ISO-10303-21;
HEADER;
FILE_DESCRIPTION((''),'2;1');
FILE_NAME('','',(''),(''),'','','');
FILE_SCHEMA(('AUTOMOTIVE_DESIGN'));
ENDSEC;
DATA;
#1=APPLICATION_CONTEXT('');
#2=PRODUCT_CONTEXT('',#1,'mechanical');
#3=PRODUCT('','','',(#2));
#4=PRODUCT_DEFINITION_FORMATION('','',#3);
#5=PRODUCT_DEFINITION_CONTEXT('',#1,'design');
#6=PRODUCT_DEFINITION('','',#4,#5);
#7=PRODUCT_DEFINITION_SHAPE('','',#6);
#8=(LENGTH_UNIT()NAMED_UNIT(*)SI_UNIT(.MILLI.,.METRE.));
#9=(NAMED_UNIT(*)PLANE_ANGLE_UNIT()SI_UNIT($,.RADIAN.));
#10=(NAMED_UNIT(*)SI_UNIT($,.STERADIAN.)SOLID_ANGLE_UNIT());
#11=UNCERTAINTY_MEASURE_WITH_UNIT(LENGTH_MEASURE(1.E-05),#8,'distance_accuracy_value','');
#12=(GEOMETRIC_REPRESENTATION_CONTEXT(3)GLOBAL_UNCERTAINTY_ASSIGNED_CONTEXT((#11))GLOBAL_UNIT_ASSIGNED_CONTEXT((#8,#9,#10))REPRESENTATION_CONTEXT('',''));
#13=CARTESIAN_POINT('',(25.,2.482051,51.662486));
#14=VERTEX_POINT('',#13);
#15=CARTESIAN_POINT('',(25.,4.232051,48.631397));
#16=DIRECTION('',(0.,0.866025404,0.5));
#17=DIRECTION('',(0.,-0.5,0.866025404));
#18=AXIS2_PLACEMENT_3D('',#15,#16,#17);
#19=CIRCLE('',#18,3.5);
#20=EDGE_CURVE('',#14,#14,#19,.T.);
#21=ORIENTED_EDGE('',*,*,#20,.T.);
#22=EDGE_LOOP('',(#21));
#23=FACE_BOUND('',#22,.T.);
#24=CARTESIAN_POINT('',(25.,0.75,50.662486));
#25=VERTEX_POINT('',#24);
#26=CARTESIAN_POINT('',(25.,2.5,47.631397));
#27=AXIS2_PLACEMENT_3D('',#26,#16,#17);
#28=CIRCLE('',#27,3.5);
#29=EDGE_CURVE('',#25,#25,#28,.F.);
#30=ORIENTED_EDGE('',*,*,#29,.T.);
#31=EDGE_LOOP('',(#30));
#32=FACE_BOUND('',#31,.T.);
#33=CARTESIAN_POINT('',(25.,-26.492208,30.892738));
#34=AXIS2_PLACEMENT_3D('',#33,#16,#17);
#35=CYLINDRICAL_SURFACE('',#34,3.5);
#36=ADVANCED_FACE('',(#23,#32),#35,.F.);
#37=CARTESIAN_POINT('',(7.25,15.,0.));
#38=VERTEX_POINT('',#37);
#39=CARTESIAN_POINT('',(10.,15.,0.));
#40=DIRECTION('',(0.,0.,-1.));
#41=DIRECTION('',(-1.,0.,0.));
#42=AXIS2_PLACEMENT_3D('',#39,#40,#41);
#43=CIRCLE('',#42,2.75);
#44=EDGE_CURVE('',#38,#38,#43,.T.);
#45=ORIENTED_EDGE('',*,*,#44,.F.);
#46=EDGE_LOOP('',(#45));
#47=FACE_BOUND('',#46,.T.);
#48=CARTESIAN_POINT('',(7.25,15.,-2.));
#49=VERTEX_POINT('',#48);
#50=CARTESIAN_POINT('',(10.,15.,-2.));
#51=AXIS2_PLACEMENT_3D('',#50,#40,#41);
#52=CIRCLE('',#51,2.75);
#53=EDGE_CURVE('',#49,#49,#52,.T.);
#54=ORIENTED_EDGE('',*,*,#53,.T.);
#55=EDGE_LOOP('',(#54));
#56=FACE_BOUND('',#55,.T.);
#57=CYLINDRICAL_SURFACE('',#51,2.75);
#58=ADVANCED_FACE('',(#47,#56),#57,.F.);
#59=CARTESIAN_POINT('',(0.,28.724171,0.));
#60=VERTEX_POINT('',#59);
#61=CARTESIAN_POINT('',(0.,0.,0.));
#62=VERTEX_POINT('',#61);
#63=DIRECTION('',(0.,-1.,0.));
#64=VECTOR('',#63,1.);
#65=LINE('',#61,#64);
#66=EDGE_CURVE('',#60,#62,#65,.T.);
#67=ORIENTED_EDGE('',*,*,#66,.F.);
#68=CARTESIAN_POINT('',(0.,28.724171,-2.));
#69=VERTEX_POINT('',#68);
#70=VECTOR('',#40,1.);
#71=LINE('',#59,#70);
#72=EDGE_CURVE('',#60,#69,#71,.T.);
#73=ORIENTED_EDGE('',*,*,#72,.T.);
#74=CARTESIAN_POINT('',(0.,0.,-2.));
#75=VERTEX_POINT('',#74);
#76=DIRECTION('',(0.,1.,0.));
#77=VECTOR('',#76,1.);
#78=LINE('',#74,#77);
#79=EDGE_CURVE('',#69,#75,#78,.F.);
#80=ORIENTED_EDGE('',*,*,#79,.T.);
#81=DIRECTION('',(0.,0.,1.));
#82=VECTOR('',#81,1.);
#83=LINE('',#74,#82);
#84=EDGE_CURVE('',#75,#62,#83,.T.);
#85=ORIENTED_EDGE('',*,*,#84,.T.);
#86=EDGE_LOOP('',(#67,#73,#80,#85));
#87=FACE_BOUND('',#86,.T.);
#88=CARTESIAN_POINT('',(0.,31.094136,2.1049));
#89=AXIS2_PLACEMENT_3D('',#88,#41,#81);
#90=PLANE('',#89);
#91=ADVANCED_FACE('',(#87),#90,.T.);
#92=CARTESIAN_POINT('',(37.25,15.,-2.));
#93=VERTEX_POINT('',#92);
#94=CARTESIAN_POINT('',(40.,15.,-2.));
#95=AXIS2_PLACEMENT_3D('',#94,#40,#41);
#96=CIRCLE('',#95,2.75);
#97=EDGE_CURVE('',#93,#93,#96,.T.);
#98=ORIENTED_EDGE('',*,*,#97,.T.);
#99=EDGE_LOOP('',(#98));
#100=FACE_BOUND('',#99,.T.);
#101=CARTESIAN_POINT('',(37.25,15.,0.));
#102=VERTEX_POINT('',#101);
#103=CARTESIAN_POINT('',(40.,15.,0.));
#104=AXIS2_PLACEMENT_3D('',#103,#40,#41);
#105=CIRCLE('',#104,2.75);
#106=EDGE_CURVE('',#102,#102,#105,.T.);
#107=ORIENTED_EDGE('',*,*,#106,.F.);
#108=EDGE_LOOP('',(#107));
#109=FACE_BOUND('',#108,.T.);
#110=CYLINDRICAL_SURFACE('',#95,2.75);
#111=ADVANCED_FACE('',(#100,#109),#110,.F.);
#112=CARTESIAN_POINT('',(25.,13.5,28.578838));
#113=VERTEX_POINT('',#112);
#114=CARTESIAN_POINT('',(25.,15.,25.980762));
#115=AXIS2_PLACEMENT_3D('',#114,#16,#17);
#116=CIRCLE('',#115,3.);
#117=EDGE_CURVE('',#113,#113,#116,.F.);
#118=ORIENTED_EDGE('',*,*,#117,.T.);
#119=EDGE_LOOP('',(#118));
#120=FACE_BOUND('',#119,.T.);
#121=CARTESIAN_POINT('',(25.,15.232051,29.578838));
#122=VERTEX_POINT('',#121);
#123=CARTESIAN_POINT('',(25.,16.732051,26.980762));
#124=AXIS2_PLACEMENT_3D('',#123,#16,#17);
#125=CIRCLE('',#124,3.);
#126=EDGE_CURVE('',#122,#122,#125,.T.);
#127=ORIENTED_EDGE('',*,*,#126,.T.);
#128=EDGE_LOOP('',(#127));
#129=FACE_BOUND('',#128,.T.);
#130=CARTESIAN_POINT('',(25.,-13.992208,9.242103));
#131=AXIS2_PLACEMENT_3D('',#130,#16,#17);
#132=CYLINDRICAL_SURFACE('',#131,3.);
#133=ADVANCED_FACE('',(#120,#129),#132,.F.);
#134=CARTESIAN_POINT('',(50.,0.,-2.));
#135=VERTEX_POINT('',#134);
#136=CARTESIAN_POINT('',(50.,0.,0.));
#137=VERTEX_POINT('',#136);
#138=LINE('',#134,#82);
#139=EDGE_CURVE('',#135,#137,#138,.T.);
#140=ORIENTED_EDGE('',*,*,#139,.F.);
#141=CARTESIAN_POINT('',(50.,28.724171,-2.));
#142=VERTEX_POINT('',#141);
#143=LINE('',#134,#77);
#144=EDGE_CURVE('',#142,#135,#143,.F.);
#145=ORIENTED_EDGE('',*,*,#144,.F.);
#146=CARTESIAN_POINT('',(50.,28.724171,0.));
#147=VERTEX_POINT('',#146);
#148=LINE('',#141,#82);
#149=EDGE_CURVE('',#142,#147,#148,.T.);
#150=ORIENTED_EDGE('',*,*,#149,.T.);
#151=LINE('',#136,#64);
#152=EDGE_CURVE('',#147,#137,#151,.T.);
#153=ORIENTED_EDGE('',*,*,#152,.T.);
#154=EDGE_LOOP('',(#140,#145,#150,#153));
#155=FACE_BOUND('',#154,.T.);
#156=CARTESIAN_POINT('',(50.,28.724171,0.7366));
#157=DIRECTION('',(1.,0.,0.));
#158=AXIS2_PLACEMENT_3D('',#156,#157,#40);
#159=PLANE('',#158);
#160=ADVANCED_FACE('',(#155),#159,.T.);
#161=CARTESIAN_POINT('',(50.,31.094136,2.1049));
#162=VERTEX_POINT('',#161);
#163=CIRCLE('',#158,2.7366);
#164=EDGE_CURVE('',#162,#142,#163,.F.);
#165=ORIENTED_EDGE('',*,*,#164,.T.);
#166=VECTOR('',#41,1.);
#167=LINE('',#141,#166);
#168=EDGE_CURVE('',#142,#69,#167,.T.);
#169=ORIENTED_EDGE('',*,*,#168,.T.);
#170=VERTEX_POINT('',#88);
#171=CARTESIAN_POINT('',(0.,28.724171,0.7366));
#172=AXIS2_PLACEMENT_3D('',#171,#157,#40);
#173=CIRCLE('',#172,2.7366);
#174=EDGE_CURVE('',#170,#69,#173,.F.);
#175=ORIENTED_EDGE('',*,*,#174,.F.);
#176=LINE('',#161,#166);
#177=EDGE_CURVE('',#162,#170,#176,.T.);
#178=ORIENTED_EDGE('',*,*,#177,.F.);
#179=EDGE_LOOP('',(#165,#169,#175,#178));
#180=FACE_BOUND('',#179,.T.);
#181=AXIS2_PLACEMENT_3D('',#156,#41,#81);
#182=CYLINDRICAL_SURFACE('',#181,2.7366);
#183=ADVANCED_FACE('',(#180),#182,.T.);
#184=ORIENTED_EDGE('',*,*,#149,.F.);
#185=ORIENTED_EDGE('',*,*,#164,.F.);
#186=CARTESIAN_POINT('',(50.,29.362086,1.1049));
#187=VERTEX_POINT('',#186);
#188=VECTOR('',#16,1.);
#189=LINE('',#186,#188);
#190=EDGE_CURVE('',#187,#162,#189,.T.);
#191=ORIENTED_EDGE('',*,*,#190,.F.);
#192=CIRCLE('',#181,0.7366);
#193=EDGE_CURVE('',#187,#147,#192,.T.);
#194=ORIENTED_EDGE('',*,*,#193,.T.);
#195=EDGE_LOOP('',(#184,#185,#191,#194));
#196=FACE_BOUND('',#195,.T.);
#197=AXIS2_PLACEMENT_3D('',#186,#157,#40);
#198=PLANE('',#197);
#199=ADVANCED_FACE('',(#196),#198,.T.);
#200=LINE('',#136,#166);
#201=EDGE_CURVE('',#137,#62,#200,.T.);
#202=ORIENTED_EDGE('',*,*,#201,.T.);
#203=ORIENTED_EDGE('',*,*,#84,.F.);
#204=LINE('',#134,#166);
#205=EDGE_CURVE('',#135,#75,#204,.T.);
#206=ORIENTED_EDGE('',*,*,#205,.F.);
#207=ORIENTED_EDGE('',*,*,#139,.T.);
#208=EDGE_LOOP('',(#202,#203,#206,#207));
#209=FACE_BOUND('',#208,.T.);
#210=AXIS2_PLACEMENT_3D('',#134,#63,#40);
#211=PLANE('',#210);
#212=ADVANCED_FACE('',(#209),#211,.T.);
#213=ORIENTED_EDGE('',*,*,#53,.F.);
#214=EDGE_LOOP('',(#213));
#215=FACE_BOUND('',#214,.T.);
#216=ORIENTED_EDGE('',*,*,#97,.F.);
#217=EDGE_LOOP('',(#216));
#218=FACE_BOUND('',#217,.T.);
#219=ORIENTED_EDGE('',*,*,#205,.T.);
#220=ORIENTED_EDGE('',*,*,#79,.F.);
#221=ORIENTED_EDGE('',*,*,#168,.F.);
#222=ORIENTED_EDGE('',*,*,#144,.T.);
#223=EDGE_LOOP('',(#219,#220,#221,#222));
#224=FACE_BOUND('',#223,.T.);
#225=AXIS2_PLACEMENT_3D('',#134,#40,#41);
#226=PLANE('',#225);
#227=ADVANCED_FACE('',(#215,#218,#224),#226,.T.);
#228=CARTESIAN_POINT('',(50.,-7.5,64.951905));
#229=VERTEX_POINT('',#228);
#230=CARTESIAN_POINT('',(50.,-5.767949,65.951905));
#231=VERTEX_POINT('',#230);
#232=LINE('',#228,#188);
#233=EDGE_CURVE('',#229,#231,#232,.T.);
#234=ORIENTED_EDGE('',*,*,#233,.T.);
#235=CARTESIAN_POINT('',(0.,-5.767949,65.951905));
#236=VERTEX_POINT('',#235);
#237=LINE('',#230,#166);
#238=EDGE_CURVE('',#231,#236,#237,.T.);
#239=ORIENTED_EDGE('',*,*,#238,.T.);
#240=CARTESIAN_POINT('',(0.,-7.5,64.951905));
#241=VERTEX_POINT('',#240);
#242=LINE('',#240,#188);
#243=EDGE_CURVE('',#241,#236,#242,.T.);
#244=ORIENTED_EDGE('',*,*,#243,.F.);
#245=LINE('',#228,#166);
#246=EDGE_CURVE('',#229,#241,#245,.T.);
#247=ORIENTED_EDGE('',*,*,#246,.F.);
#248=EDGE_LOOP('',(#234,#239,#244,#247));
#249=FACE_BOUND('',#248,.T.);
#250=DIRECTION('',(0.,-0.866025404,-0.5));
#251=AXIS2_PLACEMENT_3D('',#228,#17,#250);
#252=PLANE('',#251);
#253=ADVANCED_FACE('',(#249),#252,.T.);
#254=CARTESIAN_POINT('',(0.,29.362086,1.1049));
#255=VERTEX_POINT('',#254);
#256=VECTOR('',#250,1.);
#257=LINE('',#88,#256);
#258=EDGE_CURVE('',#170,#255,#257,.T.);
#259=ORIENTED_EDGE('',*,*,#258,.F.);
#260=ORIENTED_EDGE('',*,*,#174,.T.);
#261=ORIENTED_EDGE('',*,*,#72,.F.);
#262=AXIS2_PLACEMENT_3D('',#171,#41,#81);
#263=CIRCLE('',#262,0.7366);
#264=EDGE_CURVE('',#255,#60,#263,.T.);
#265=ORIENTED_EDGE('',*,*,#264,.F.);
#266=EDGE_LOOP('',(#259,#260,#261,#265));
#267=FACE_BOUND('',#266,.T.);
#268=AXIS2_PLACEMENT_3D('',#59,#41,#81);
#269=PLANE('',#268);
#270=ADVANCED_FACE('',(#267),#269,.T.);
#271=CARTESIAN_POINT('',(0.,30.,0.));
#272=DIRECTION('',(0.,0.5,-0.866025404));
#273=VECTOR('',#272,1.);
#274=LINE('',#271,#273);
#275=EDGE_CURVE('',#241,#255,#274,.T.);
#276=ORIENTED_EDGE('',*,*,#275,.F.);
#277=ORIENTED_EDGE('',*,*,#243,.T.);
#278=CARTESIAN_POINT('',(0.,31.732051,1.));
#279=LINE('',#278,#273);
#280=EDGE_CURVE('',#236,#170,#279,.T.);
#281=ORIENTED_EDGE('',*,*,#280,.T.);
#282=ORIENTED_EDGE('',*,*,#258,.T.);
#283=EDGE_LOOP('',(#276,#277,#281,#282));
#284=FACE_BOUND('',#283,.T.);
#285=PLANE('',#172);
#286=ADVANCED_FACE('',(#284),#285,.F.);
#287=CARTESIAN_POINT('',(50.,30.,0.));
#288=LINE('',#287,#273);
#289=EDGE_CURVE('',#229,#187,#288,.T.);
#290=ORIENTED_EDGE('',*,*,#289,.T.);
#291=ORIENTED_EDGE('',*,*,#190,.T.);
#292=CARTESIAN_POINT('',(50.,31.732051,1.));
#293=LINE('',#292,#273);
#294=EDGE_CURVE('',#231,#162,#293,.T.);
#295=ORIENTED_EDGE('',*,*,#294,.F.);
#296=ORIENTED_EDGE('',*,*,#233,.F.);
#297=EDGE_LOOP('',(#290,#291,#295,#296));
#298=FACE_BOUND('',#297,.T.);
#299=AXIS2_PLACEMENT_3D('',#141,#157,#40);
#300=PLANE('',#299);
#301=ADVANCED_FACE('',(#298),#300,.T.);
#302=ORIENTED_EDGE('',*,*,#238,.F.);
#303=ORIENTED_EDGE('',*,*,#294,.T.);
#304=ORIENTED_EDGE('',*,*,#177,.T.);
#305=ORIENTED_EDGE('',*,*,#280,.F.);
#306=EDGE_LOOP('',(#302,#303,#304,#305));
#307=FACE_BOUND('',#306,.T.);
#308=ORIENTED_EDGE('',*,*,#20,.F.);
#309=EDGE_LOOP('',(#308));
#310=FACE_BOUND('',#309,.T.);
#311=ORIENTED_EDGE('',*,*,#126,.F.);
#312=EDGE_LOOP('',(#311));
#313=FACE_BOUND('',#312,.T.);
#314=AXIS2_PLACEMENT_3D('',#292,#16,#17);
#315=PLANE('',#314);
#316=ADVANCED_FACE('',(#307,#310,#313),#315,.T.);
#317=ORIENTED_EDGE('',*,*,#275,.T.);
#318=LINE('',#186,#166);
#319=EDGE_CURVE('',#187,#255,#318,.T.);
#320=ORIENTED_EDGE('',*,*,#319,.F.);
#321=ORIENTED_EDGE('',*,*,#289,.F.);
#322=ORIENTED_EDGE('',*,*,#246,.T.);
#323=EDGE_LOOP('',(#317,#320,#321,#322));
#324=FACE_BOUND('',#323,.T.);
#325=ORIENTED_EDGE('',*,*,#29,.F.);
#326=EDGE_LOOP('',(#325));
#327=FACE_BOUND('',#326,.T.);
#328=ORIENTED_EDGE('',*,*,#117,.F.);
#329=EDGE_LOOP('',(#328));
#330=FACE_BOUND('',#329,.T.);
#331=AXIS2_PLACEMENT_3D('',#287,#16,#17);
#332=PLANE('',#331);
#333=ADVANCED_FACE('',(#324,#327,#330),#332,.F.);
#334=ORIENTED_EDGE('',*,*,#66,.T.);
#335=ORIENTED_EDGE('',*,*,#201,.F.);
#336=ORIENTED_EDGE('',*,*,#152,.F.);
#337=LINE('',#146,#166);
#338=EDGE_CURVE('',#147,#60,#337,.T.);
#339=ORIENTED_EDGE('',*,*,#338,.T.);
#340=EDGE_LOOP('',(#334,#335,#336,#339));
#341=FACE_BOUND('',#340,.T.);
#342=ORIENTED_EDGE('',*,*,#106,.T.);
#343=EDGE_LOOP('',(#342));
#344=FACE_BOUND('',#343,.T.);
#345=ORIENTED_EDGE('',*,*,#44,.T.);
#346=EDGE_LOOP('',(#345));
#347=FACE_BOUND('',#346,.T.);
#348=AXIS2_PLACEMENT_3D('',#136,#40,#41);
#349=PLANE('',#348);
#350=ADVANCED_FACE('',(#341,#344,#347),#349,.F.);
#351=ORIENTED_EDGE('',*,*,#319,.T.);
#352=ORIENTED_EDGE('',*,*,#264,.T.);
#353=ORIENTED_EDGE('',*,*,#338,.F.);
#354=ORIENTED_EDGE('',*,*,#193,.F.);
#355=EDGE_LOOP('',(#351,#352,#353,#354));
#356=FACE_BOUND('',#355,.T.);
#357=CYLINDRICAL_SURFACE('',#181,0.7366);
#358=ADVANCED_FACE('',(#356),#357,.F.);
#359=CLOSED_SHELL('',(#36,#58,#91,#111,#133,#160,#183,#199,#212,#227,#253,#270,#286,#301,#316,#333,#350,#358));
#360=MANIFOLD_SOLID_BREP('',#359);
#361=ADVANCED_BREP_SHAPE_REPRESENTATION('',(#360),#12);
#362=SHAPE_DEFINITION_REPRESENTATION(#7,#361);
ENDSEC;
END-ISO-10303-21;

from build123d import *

# Parameters (mm, degrees)
FLANGE_BASE1_DEPTH          = 50
CORTE_EXTRUS_O2_REACH       = 80.784
ESBO_O2_R                   = 3
ESBO_O2_R_2                 = 3.5
FURO_COM_FOLGA_DE_M51_D     = 5.5
FURO_COM_FOLGA_DE_M51_DEPTH = 2


# Sheet-metal steps are written as plain solids
with BuildPart() as part:
    # Esboço1 → Flange-base1 (new body)
    with BuildSketch(Plane(origin=(0, 0, 0), x_dir=(0, 0, -1), z_dir=(1, 0, 0))):
        with BuildLine():
            Line((0, 0), (0, 28.724171375))
            ThreePointArc((0, 28.724171375), (-0.3683, 29.362085688), (-1.1049, 29.362085688))
            Line((-1.1049, 29.362085688), (-64.951905284, -7.5))
            Line((-64.951905284, -7.5), (-65.951905284, -5.767949192))
            Line((-65.951905284, -5.767949192), (-2.1049, 31.094136495))
            ThreePointArc((-2.1049, 31.094136495), (0.6317, 31.094136495), (2, 28.724171375))
            Line((2, 28.724171375), (2, 0))
            Line((2, 0), (0, 0))
        make_face()
    extrude(amount=FLANGE_BASE1_DEPTH)

    # Esboço2 → Corte-extrusão2 (cut, up to next)
    with BuildSketch(Plane(origin=(0, 24.232050808, 13.990381057), x_dir=(1, 0, 0), z_dir=(0, 0.866025403784436, 0.5000000000000044)), mode=Mode.PRIVATE) as corte_extrus_o2_sk1:
        with Locations(Location((25, -15, 0), (0, 0, 270))):
            Circle(ESBO_O2_R)
    corte_extrus_o2_tool1 = extrude(corte_extrus_o2_sk1.sketch, amount=-CORTE_EXTRUS_O2_REACH, mode=Mode.PRIVATE) & part.part
    # Esboço2 → Corte-extrusão2 (cut, up to next)
    with BuildSketch(Plane(origin=(0, 24.232050808, 13.990381057), x_dir=(1, 0, 0), z_dir=(0, 0.866025403784436, 0.5000000000000044)), mode=Mode.PRIVATE) as corte_extrus_o2_sk2:
        with Locations(Location((25, -40, 0), (0, 0, 270))):
            Circle(ESBO_O2_R_2)
    corte_extrus_o2_tool2 = extrude(corte_extrus_o2_sk2.sketch, amount=-CORTE_EXTRUS_O2_REACH, mode=Mode.PRIVATE) & part.part
    add(corte_extrus_o2_tool1.solids().sort_by_distance((25, 16.732051, 26.980762))[0], mode=Mode.SUBTRACT)
    add(corte_extrus_o2_tool2.solids().sort_by_distance((25, 4.232051, 48.631397))[0], mode=Mode.SUBTRACT)

    # Furo com folga de M51
    with Locations(Plane(origin=(0, 0, -2), x_dir=(-1, 0, 0), z_dir=(0, 0, -1))):
        with Locations((-10, 15), (-40, 15)):
            Hole(FURO_COM_FOLGA_DE_M51_D / 2, depth=FURO_COM_FOLGA_DE_M51_DEPTH)


solid = part.part
